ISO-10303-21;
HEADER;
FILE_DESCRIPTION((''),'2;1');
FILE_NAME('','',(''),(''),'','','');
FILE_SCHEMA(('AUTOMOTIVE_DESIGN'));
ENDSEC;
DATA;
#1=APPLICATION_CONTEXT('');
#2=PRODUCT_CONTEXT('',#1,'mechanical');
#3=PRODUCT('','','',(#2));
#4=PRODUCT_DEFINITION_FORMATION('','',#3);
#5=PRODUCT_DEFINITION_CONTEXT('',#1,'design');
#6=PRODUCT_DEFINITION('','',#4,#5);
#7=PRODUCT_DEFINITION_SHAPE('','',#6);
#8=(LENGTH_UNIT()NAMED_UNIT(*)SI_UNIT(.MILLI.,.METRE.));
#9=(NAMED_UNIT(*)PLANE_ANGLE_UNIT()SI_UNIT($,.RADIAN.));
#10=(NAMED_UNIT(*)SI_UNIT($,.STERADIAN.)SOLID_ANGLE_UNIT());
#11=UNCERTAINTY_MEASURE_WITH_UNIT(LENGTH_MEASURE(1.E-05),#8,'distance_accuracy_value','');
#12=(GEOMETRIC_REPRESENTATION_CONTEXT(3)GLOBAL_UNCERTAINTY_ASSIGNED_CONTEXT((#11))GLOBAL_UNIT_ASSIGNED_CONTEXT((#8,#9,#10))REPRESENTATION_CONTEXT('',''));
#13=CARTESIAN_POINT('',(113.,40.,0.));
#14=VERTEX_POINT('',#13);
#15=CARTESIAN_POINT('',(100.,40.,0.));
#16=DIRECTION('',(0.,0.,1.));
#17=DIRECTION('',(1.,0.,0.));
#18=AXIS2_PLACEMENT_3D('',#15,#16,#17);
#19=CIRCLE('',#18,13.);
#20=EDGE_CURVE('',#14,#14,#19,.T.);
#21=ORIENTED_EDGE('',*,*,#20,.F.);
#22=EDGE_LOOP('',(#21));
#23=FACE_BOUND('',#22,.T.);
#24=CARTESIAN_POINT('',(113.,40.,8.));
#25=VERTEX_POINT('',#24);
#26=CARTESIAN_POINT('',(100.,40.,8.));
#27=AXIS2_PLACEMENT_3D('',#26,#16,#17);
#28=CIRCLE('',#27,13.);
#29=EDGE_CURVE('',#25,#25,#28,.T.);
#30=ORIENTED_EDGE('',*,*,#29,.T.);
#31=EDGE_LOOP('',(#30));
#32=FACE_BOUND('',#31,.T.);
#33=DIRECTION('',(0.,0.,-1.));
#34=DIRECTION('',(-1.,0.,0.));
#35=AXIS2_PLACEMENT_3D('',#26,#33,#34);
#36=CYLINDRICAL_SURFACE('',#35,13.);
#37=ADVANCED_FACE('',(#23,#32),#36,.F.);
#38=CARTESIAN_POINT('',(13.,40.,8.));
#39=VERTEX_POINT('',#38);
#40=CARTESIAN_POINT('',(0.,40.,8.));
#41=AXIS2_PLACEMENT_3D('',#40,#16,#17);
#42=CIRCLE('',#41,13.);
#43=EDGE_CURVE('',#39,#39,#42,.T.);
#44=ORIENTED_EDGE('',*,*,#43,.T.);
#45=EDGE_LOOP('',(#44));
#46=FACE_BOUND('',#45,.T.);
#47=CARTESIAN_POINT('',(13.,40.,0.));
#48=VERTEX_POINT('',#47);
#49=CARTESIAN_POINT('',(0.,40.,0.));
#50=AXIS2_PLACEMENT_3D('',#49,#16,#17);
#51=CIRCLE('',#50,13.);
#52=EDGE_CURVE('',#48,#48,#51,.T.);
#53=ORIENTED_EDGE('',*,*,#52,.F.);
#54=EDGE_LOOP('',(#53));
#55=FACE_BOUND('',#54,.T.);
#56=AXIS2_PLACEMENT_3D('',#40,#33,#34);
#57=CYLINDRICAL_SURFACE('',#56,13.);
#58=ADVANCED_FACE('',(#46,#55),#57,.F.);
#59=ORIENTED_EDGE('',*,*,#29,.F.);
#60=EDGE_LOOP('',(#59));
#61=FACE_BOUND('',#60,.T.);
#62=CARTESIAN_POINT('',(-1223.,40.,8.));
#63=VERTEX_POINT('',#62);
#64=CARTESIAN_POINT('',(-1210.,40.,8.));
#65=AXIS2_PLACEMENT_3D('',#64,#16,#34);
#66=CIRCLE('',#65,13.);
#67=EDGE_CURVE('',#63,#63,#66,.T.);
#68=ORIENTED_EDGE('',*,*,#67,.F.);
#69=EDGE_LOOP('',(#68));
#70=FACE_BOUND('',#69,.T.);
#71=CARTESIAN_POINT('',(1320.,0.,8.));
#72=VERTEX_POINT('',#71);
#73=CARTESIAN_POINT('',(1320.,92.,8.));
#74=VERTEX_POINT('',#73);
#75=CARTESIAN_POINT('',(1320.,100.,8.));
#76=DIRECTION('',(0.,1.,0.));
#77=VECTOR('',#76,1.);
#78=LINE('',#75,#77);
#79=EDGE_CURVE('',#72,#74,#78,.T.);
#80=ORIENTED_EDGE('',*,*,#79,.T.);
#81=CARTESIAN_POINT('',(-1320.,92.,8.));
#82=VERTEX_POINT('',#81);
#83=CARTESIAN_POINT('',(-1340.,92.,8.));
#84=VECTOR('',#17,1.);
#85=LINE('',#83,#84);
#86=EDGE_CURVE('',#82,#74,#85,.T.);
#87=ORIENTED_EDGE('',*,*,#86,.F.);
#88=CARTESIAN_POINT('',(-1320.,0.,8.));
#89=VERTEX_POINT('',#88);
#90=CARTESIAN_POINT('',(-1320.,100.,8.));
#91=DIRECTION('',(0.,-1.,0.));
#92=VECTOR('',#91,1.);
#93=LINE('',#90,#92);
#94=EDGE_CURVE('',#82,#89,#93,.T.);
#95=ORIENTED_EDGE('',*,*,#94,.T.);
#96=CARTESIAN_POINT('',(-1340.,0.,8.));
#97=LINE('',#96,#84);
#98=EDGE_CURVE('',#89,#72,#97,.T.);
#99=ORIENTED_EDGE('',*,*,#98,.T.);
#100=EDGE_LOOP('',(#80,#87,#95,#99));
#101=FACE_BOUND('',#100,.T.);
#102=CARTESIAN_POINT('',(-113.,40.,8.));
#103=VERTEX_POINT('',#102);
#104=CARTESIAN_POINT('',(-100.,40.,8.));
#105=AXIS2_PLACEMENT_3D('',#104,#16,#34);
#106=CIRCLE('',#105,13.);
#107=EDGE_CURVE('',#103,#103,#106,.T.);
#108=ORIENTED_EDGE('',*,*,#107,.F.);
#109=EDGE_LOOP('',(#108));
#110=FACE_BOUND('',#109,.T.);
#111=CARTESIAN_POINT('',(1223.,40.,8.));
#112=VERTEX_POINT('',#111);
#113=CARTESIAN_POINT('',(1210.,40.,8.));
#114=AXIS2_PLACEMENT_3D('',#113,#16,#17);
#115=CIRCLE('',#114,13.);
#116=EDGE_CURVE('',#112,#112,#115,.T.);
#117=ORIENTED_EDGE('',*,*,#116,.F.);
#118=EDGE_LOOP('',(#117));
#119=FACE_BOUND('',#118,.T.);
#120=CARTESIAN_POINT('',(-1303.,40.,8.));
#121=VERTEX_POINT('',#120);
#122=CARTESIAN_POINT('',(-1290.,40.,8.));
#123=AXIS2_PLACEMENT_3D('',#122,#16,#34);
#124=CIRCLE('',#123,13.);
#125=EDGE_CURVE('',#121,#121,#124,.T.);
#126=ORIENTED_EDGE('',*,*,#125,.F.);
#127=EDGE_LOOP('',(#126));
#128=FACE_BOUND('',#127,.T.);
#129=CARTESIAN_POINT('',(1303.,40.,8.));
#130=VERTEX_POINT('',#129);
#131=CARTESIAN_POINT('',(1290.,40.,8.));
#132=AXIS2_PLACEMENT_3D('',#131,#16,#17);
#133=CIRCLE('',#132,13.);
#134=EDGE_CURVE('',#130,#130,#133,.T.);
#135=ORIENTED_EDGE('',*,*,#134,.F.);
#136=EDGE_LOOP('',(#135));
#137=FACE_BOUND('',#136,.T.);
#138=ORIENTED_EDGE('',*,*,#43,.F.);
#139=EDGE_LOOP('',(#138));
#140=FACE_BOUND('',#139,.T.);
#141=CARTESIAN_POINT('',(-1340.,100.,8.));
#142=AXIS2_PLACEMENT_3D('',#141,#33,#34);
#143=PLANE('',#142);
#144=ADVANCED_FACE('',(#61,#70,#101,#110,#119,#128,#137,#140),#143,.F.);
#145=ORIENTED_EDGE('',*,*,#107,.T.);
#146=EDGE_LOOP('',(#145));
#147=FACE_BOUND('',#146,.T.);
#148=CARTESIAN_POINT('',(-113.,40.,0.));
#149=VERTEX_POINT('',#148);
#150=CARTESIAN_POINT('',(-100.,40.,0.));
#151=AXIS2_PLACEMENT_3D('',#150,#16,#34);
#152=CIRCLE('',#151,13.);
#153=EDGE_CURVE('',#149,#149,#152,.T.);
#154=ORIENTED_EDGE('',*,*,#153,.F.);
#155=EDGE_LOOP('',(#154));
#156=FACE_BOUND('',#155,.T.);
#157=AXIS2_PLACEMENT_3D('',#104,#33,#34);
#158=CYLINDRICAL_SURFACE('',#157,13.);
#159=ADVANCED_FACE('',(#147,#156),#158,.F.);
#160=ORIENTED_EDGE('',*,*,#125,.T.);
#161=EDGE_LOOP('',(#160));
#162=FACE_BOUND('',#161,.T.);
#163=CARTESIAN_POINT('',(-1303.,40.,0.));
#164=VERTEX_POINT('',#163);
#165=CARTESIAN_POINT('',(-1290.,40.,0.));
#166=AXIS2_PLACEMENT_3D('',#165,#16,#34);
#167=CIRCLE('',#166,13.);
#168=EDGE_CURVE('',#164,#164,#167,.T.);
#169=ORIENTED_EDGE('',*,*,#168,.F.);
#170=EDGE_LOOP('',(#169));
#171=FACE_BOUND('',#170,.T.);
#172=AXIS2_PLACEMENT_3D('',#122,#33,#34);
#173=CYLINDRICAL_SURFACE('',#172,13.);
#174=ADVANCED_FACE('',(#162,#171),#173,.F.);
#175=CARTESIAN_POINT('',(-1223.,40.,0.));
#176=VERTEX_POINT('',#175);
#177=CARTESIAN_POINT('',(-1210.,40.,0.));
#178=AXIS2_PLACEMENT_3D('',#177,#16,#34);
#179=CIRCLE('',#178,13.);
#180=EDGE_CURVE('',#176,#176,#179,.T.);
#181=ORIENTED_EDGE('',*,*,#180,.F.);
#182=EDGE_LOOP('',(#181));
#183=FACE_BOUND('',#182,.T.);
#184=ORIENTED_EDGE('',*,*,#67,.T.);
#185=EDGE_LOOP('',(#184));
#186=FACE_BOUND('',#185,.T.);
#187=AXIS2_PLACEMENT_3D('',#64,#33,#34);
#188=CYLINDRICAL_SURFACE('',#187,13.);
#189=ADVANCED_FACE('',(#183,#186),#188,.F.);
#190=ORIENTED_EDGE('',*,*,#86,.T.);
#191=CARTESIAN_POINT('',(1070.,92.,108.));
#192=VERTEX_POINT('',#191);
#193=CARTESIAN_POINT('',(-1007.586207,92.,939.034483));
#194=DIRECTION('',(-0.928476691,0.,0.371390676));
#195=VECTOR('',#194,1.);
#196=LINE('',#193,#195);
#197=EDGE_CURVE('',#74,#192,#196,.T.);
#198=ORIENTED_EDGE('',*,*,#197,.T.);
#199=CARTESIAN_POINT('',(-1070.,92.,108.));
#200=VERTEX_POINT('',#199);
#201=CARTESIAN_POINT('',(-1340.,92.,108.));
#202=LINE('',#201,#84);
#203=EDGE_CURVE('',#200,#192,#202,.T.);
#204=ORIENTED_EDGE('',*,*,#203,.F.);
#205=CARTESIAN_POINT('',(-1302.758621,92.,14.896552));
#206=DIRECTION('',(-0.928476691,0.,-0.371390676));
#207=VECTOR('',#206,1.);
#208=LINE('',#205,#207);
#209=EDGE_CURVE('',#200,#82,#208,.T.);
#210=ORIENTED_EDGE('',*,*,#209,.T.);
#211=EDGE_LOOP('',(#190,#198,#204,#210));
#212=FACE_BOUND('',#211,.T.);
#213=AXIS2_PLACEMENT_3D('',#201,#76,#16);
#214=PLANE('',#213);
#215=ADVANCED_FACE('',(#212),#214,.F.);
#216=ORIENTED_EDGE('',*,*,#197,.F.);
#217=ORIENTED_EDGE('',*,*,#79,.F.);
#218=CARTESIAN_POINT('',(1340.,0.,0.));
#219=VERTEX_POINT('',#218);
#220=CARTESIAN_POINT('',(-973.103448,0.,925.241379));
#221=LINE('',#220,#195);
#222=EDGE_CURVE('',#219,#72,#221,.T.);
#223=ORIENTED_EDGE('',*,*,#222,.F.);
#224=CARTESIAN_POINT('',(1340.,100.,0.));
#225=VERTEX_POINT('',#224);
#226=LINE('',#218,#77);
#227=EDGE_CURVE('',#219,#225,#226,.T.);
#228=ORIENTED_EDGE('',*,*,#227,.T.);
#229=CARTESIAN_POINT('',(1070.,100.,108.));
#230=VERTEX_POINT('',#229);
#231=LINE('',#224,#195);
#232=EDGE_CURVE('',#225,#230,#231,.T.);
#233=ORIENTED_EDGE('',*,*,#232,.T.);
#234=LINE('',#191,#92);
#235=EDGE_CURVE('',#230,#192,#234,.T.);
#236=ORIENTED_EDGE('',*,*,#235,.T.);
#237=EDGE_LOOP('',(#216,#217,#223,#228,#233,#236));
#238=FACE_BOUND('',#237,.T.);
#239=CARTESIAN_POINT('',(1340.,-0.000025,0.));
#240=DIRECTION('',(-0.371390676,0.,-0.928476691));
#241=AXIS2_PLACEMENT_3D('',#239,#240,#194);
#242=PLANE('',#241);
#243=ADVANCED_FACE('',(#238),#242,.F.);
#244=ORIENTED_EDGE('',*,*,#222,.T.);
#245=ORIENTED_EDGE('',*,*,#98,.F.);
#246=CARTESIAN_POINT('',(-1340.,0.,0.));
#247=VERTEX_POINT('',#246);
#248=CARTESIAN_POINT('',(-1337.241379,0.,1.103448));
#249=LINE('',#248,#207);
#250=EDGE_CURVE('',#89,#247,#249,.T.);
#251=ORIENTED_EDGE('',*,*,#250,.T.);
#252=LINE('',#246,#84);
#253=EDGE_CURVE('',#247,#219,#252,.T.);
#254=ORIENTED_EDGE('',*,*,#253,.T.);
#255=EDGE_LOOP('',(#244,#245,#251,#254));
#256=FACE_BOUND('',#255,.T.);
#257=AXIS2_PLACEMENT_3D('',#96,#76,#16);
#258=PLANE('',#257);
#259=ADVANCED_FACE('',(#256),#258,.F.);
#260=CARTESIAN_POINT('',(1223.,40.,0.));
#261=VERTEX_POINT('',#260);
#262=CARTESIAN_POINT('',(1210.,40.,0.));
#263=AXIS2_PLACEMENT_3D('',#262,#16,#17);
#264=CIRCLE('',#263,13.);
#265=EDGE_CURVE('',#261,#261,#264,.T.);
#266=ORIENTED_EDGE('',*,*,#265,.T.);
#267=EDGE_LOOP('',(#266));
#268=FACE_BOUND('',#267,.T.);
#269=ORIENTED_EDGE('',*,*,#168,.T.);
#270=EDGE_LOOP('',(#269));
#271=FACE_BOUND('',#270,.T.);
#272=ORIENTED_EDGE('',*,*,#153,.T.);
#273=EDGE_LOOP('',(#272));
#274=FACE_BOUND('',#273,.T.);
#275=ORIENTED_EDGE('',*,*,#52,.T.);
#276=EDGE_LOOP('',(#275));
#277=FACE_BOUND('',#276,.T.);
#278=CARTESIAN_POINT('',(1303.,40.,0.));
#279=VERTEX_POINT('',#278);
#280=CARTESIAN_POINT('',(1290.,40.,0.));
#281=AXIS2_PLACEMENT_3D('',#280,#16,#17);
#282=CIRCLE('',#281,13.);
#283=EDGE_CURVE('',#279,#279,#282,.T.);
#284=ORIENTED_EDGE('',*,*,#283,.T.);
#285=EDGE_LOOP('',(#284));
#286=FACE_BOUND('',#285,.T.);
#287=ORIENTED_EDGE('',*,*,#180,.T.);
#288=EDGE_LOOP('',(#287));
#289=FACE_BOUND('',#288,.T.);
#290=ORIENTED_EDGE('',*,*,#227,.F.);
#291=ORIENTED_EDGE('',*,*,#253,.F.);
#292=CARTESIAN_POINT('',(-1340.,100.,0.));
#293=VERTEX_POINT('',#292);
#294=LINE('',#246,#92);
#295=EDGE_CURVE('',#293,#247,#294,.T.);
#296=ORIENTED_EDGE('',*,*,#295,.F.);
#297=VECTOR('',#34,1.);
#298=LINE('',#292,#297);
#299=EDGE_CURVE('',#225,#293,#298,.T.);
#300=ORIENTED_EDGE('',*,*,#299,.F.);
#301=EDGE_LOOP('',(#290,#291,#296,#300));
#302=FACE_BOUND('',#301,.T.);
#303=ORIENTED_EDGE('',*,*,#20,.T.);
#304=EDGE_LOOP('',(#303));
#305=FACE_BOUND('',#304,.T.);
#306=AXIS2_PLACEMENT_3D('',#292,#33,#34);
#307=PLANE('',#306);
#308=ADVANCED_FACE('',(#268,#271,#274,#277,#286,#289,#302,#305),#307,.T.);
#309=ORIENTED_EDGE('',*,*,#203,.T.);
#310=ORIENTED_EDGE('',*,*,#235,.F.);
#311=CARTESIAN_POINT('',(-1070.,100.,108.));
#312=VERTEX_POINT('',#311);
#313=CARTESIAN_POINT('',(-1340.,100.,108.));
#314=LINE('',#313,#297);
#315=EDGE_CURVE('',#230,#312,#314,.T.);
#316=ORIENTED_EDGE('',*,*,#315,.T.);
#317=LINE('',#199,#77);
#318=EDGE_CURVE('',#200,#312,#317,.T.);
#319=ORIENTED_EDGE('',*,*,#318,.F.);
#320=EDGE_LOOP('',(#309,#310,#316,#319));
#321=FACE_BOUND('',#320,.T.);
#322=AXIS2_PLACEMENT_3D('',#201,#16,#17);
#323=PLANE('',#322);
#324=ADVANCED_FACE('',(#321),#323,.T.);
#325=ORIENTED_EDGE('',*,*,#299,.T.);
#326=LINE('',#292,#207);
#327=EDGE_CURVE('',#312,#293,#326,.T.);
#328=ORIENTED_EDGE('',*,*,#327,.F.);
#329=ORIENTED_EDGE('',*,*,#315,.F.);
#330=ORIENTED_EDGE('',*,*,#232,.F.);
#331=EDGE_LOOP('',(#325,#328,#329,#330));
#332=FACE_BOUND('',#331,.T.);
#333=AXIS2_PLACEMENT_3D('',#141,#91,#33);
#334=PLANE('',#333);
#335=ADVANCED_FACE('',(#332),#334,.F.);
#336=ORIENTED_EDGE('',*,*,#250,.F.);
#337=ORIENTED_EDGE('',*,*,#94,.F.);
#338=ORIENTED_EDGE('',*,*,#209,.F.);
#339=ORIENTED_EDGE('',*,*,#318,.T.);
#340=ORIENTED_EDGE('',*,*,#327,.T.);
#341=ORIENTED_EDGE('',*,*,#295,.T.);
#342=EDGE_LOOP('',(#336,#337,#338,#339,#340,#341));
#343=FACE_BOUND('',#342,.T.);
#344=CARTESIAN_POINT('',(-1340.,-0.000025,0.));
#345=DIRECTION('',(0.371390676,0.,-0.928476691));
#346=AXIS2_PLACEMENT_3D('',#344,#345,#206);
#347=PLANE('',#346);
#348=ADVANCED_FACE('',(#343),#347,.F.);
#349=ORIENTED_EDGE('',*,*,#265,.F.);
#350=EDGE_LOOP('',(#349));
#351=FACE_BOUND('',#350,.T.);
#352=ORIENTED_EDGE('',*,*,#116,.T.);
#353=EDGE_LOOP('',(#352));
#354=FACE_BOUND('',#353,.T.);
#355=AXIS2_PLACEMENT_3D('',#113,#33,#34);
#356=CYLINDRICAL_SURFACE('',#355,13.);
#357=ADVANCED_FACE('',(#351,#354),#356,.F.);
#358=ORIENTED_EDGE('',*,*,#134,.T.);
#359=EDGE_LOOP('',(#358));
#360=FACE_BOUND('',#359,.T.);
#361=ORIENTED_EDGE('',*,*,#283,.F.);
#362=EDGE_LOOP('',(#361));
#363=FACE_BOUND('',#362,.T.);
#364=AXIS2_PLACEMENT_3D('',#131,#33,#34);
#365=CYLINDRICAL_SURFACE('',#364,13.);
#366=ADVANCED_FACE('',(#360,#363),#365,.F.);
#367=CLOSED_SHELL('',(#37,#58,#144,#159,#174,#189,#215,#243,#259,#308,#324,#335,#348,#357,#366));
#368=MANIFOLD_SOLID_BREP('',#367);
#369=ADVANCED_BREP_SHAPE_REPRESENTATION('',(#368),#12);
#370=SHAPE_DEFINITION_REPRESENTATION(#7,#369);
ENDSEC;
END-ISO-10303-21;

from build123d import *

# Parameters (mm, degrees)
SKETCH_1_W          = 2680
SKETCH_1_H          = 100
SKETCH_1_R          = 13
EXTRUDE_498_DEPTH   = 8
SKETCH_2_W          = 2680
SKETCH_2_H          = 8
EXTRUDE_1_DEPTH     = 100
CUT_EXTRUDE_1_DEPTH = 100


# Read off the part's stored shape, not the designer's step: 切除-拉伸1
with BuildPart() as part:
    # 草图1 → Extrude 498 (new body)
    with BuildSketch(Plane.XY):
        with Locations((0, 50)):
            Rectangle(SKETCH_1_W, SKETCH_1_H)
        with Locations((1290, 40)):
            Circle(SKETCH_1_R, mode=Mode.SUBTRACT)
        with Locations((1210, 40)):
            Circle(SKETCH_1_R, mode=Mode.SUBTRACT)
        with Locations((0, 40)):
            Circle(SKETCH_1_R, mode=Mode.SUBTRACT)
        with Locations((100, 40)):
            Circle(SKETCH_1_R, mode=Mode.SUBTRACT)
        with Locations(Location((-100, 40, 0), (0, 0, 180))):
            Circle(SKETCH_1_R, mode=Mode.SUBTRACT)
        with Locations(Location((-1290, 40, 0), (0, 0, 180))):
            Circle(SKETCH_1_R, mode=Mode.SUBTRACT)
        with Locations(Location((-1210, 40, 0), (0, 0, 180))):
            Circle(SKETCH_1_R, mode=Mode.SUBTRACT)
    extrude(amount=EXTRUDE_498_DEPTH)

    # 草图2 → 凸台-拉伸1 (add)
    with BuildSketch(Plane.XY.offset(8)):
        with Locations((0, 96)):
            Rectangle(SKETCH_2_W, SKETCH_2_H)
    extrude(amount=EXTRUDE_1_DEPTH)

    # 切除-拉伸1 outline → 切除-拉伸1 (cut)
    with BuildSketch(Plane(origin=(0, 0, 0), x_dir=(1, 0, 0), z_dir=(0, 1, 0))):
        Polygon((1340, -108), (1340, 0), (1070, -108), align=None)
        Polygon((-1340, -108), (-1070, -108), (-1340, 0), align=None)
    extrude(amount=CUT_EXTRUDE_1_DEPTH, mode=Mode.SUBTRACT)


solid = part.part
